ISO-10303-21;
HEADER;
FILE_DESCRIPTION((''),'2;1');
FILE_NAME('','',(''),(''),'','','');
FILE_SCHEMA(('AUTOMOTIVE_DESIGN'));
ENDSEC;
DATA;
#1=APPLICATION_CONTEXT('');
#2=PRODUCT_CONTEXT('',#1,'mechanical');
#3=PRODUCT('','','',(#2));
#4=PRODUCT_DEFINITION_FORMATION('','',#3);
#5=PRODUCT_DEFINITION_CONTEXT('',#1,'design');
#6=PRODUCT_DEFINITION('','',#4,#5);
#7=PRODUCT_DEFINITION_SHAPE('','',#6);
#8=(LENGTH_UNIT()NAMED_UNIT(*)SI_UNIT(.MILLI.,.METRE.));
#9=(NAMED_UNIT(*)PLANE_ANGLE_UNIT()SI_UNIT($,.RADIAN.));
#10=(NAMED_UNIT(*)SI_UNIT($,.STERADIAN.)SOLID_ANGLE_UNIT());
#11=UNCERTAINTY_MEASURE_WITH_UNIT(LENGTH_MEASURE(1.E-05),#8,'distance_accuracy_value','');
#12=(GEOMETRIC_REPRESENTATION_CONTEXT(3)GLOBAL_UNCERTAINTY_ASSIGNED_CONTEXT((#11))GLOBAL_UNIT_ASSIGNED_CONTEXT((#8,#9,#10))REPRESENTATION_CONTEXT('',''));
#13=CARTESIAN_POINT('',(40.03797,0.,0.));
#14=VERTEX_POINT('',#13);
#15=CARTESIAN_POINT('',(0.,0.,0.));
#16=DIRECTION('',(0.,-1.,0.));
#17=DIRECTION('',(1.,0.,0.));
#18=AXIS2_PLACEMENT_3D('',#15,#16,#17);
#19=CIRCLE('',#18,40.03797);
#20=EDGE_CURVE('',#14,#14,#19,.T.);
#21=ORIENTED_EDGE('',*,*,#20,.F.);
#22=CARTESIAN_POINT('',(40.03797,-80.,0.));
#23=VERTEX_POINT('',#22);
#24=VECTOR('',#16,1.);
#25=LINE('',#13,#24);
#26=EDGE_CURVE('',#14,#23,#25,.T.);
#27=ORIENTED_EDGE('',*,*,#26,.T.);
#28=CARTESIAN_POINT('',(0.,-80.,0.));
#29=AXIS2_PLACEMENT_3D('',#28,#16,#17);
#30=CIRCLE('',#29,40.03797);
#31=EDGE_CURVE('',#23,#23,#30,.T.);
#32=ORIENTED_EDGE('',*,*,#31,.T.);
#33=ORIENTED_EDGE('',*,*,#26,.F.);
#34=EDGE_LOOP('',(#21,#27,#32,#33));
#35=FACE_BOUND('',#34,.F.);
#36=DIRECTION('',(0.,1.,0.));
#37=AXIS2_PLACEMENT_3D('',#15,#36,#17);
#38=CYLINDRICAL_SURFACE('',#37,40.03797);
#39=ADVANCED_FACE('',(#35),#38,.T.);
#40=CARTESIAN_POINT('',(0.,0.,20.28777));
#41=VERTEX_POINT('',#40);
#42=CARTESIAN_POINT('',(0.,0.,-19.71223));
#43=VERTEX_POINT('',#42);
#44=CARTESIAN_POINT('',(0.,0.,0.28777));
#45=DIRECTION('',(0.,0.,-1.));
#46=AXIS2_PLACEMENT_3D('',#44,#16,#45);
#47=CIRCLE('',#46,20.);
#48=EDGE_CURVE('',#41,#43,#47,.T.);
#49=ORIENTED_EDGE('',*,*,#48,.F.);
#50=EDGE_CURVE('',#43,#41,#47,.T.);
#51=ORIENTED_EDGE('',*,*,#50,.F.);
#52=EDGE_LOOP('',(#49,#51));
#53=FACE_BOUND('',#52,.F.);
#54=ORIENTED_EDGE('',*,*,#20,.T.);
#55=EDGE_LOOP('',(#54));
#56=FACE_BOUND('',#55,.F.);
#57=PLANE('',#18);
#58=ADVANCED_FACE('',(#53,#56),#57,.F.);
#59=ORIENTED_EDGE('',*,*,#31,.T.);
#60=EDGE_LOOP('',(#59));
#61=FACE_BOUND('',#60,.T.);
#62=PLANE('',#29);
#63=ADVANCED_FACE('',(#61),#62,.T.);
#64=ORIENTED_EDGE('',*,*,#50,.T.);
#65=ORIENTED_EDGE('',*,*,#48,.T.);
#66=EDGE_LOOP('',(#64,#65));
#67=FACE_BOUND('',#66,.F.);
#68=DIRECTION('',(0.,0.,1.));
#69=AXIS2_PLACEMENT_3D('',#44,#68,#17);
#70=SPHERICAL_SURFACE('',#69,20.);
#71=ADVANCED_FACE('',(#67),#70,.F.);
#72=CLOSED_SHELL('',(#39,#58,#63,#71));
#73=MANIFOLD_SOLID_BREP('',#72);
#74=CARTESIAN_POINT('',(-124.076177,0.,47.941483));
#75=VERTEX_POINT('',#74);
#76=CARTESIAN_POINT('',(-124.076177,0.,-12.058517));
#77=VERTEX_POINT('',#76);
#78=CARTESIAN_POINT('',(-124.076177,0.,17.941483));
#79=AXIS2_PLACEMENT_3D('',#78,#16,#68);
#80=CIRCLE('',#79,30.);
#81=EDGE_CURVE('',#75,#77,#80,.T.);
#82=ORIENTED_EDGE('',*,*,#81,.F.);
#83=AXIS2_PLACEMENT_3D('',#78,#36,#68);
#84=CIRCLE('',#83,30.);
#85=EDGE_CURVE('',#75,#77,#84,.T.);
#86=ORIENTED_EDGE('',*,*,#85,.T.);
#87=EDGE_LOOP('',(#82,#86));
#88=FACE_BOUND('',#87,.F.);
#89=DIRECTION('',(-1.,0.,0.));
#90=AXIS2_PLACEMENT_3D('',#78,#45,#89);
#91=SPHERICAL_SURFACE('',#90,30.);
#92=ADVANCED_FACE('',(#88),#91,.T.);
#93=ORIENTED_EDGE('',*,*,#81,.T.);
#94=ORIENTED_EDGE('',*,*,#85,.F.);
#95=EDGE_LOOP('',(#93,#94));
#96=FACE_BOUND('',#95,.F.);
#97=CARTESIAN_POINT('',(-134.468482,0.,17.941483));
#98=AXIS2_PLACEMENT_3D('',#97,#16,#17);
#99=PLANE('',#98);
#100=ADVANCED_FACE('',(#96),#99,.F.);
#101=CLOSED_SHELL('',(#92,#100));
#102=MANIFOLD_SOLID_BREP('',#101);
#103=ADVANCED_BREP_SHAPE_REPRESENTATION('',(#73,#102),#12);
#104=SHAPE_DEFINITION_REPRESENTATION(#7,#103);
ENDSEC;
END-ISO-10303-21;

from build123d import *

# Parameters (mm, degrees)
F0_R     = 40.0379704722
F1_DEPTH = 80
F7_ANGLE = 180


# Not quite as in the source:
# - the program builds the solid bodies; features that only make, move or delete a surface that nothing else refers to are left out


with BuildPart() as f1:
    # F0 (on Front) → F1 (new body)
    with BuildSketch(Plane.XZ):
        Circle(F0_R)
    extrude(amount=F1_DEPTH)

    # F2 (on Front) → F3 (revolve, cut)
    with BuildSketch(Plane.XZ):
        with BuildLine():
            Line((0, 20.2877700597), (0, -19.7122299403))
            ThreePointArc((0, -19.7122299403), (20, 0.2877700597), (0, 20.2877700597))
        make_face()
    revolve(axis=Axis((0, 0, 0.2877700597), (0, 0, 1)), mode=Mode.SUBTRACT)


with BuildPart() as f7:
    # F6 (on Front) → F7 (revolve)
    with BuildSketch(Plane.XZ):
        with BuildLine():
            ThreePointArc((-124.0761767042, 47.9414828308), (-154.0761767042, 17.9414828308), (-124.0761767042, -12.0585171692))
            Line((-124.0761767042, -12.0585171692), (-124.0761767042, 47.9414828308))
        make_face()
    revolve(axis=Axis((-124.0761767042, 0, 17.9414828308), (0, 0, 1)), revolution_arc=F7_ANGLE)


solid = Compound([f1.part, f7.part])
